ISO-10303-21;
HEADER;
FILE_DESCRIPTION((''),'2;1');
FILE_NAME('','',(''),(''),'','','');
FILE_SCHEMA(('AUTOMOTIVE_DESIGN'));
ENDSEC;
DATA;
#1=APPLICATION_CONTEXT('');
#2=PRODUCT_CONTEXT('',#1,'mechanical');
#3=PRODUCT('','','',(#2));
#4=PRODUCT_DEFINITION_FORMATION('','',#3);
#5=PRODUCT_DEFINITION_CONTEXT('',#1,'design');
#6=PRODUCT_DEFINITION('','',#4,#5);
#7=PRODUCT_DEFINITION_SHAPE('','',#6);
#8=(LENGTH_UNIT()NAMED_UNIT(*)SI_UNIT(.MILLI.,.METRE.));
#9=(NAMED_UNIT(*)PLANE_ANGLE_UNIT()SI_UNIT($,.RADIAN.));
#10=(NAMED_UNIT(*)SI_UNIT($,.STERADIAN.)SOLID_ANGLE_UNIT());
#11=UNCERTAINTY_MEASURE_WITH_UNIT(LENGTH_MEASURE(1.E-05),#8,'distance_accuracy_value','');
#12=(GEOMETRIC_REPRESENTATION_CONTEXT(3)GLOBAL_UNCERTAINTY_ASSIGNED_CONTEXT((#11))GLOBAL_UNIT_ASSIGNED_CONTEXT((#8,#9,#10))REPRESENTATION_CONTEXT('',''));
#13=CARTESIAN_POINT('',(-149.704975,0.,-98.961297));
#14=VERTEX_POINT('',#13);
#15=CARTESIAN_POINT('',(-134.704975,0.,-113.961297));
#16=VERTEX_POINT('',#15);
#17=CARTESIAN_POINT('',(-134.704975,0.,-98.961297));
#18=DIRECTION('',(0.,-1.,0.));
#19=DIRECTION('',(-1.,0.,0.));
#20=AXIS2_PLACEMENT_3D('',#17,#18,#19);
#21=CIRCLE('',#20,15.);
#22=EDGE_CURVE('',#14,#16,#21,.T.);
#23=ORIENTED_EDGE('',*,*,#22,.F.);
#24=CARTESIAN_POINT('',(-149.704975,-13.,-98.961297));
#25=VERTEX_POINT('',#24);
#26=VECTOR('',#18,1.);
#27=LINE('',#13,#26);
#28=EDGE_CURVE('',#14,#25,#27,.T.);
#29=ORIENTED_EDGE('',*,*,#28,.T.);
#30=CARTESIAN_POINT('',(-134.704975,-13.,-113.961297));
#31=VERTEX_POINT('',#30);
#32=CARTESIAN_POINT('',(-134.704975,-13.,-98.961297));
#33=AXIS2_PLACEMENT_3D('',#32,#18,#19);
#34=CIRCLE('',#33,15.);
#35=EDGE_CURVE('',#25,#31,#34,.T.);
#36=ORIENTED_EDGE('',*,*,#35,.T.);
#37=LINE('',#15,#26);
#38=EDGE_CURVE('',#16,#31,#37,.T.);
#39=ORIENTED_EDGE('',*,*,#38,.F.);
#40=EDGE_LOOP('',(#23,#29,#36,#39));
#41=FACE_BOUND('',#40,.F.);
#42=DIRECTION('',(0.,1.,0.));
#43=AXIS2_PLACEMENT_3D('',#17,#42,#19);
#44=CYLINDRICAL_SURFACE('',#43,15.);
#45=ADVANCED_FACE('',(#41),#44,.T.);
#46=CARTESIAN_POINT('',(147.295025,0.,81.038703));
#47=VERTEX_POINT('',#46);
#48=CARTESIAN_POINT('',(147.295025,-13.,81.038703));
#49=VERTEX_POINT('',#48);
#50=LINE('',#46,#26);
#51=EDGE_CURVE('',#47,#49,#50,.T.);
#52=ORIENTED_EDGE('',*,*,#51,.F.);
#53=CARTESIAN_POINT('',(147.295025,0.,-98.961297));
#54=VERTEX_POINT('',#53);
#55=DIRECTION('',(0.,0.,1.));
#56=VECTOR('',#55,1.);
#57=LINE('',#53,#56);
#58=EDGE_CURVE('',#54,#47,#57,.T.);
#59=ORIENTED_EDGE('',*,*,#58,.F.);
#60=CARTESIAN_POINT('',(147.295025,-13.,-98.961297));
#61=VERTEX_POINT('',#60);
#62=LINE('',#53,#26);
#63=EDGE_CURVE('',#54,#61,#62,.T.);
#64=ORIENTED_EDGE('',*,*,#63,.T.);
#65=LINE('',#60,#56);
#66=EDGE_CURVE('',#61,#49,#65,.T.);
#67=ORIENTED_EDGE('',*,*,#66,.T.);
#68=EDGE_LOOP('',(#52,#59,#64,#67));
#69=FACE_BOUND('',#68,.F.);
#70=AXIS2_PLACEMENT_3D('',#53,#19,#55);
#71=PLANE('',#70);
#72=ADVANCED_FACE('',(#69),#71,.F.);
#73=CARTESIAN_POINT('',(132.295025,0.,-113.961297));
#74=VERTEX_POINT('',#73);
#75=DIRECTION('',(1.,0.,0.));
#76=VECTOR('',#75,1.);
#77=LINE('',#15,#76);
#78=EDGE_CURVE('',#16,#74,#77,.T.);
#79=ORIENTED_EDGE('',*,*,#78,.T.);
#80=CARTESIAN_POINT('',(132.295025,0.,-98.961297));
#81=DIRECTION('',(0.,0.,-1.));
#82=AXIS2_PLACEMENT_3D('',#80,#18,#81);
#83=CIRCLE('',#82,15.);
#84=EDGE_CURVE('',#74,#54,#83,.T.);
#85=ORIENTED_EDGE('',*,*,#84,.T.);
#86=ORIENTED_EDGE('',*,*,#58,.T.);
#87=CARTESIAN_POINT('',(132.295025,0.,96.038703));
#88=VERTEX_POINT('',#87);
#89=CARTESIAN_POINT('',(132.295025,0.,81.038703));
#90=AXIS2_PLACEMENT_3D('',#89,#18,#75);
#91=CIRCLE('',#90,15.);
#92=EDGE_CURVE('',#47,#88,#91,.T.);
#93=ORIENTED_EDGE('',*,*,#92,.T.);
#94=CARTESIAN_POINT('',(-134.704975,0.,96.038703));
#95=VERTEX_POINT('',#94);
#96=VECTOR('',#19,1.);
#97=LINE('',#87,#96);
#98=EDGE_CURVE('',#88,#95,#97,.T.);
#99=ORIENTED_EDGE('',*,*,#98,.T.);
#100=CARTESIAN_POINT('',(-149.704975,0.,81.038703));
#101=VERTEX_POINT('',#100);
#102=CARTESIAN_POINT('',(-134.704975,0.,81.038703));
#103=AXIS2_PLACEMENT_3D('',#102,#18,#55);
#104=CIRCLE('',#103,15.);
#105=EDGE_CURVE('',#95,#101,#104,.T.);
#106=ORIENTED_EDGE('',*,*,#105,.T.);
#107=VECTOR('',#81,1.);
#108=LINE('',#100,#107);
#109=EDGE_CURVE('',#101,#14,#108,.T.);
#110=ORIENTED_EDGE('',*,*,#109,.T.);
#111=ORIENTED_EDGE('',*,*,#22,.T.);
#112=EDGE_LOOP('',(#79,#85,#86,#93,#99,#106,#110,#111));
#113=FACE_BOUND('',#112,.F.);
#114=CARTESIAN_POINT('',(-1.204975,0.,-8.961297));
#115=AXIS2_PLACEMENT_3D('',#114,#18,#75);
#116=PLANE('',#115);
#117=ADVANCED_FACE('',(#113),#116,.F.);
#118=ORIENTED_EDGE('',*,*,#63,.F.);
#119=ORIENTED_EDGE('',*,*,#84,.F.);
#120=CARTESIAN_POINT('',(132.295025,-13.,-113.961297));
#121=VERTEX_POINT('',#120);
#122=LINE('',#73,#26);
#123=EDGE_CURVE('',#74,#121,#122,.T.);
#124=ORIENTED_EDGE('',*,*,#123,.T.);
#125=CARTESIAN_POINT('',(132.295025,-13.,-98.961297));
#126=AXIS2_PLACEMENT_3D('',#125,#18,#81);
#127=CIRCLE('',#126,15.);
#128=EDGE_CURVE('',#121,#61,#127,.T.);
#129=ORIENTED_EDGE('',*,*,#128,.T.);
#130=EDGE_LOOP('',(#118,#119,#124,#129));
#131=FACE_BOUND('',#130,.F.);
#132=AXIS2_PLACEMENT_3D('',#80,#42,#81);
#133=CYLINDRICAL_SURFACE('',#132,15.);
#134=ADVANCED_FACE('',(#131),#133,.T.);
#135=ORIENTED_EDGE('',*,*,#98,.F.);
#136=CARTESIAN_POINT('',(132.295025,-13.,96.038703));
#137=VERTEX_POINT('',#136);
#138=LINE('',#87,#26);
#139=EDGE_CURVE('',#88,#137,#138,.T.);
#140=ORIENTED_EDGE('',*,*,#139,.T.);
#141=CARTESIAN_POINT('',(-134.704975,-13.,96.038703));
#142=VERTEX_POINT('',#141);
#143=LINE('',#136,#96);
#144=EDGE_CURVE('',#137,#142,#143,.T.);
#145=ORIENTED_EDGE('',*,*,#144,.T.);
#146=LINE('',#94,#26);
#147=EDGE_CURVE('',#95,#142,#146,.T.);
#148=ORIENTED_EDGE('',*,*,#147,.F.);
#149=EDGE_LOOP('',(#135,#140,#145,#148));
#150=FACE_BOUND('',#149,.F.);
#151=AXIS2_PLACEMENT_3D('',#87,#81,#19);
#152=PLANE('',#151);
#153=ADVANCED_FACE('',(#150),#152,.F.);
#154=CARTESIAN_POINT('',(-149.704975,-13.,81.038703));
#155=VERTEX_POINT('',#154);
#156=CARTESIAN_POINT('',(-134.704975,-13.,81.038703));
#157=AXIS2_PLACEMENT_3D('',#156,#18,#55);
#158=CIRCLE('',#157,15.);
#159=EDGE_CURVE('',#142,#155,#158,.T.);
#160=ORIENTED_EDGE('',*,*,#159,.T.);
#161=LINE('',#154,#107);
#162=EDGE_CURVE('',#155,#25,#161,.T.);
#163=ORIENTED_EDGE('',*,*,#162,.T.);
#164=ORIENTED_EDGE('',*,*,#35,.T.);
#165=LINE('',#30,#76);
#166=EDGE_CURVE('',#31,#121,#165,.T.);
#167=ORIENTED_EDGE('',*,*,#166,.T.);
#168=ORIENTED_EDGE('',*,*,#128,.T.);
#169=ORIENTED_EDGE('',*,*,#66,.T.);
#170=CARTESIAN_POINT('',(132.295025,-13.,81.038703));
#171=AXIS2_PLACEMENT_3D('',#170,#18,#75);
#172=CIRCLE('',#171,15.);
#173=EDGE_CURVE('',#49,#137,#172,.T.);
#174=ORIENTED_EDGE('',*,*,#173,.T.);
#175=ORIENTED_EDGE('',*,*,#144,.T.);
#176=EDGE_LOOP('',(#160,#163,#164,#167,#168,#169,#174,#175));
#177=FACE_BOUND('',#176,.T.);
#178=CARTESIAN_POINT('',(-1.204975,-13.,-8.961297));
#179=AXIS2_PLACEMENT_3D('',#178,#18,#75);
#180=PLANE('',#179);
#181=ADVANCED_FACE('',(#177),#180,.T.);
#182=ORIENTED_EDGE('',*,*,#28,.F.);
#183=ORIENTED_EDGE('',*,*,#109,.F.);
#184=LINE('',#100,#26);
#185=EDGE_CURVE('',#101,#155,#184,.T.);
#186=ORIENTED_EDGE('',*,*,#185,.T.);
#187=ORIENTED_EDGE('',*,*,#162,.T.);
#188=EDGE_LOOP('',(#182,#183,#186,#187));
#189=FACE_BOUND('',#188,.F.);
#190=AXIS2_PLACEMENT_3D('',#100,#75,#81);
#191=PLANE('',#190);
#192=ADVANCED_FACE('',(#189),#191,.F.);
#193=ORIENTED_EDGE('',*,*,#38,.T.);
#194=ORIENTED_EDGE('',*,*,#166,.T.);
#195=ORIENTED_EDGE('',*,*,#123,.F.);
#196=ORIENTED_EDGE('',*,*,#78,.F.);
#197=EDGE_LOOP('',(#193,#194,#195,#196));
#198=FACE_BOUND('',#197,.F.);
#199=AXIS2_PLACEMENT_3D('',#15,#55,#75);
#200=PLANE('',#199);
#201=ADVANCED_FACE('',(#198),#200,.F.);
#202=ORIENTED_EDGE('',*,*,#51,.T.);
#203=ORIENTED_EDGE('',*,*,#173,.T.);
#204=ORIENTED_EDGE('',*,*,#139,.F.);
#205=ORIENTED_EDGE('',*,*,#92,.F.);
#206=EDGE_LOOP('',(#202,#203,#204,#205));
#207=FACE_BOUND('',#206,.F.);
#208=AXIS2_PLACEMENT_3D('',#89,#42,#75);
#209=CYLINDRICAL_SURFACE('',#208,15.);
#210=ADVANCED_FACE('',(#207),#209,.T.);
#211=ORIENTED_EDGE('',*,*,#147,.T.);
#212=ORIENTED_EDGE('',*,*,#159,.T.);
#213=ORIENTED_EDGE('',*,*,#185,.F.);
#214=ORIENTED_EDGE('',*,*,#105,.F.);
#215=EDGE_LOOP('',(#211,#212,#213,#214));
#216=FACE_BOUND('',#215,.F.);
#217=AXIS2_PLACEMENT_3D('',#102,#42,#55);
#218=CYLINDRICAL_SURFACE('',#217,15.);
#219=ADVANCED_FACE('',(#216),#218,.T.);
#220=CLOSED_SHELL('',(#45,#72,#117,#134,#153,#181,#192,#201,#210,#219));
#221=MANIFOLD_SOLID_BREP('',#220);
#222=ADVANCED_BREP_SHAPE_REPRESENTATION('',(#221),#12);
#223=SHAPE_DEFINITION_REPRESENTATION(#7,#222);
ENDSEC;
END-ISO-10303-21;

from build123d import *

# Parameters (mm, degrees)
F1_DEPTH = 13


# Not quite as in the source:
# - the program builds the solid bodies; features that only make, move or delete a surface that nothing else refers to are left out


with BuildPart() as f1:
    # F0 (on Front) → F1 (new body)
    with BuildSketch(Plane.XZ):
        with BuildLine():
            Line((132.2950250506, 96.0387027569), (-134.7049749494, 96.0387027569))
            ThreePointArc((-134.7049749494, 96.0387027569), (-145.3115766672, 91.6453044747), (-149.7049749494, 81.0387027569))
            Line((-149.7049749494, 81.0387027569), (-149.7049749494, -98.9612972431))
            ThreePointArc((-149.7049749494, -98.9612972431), (-145.3115766672, -109.5678989609), (-134.7049749494, -113.9612972431))
            Line((-134.7049749494, -113.9612972431), (132.2950250506, -113.9612972431))
            ThreePointArc((132.2950250506, -113.9612972431), (142.9016267684, -109.5678989609), (147.2950250506, -98.9612972431))
            Line((147.2950250506, -98.9612972431), (147.2950250506, 81.0387027569))
            ThreePointArc((147.2950250506, 81.0387027569), (142.9016267684, 91.6453044747), (132.2950250506, 96.0387027569))
        make_face()
    extrude(amount=F1_DEPTH)


solid = f1.part
